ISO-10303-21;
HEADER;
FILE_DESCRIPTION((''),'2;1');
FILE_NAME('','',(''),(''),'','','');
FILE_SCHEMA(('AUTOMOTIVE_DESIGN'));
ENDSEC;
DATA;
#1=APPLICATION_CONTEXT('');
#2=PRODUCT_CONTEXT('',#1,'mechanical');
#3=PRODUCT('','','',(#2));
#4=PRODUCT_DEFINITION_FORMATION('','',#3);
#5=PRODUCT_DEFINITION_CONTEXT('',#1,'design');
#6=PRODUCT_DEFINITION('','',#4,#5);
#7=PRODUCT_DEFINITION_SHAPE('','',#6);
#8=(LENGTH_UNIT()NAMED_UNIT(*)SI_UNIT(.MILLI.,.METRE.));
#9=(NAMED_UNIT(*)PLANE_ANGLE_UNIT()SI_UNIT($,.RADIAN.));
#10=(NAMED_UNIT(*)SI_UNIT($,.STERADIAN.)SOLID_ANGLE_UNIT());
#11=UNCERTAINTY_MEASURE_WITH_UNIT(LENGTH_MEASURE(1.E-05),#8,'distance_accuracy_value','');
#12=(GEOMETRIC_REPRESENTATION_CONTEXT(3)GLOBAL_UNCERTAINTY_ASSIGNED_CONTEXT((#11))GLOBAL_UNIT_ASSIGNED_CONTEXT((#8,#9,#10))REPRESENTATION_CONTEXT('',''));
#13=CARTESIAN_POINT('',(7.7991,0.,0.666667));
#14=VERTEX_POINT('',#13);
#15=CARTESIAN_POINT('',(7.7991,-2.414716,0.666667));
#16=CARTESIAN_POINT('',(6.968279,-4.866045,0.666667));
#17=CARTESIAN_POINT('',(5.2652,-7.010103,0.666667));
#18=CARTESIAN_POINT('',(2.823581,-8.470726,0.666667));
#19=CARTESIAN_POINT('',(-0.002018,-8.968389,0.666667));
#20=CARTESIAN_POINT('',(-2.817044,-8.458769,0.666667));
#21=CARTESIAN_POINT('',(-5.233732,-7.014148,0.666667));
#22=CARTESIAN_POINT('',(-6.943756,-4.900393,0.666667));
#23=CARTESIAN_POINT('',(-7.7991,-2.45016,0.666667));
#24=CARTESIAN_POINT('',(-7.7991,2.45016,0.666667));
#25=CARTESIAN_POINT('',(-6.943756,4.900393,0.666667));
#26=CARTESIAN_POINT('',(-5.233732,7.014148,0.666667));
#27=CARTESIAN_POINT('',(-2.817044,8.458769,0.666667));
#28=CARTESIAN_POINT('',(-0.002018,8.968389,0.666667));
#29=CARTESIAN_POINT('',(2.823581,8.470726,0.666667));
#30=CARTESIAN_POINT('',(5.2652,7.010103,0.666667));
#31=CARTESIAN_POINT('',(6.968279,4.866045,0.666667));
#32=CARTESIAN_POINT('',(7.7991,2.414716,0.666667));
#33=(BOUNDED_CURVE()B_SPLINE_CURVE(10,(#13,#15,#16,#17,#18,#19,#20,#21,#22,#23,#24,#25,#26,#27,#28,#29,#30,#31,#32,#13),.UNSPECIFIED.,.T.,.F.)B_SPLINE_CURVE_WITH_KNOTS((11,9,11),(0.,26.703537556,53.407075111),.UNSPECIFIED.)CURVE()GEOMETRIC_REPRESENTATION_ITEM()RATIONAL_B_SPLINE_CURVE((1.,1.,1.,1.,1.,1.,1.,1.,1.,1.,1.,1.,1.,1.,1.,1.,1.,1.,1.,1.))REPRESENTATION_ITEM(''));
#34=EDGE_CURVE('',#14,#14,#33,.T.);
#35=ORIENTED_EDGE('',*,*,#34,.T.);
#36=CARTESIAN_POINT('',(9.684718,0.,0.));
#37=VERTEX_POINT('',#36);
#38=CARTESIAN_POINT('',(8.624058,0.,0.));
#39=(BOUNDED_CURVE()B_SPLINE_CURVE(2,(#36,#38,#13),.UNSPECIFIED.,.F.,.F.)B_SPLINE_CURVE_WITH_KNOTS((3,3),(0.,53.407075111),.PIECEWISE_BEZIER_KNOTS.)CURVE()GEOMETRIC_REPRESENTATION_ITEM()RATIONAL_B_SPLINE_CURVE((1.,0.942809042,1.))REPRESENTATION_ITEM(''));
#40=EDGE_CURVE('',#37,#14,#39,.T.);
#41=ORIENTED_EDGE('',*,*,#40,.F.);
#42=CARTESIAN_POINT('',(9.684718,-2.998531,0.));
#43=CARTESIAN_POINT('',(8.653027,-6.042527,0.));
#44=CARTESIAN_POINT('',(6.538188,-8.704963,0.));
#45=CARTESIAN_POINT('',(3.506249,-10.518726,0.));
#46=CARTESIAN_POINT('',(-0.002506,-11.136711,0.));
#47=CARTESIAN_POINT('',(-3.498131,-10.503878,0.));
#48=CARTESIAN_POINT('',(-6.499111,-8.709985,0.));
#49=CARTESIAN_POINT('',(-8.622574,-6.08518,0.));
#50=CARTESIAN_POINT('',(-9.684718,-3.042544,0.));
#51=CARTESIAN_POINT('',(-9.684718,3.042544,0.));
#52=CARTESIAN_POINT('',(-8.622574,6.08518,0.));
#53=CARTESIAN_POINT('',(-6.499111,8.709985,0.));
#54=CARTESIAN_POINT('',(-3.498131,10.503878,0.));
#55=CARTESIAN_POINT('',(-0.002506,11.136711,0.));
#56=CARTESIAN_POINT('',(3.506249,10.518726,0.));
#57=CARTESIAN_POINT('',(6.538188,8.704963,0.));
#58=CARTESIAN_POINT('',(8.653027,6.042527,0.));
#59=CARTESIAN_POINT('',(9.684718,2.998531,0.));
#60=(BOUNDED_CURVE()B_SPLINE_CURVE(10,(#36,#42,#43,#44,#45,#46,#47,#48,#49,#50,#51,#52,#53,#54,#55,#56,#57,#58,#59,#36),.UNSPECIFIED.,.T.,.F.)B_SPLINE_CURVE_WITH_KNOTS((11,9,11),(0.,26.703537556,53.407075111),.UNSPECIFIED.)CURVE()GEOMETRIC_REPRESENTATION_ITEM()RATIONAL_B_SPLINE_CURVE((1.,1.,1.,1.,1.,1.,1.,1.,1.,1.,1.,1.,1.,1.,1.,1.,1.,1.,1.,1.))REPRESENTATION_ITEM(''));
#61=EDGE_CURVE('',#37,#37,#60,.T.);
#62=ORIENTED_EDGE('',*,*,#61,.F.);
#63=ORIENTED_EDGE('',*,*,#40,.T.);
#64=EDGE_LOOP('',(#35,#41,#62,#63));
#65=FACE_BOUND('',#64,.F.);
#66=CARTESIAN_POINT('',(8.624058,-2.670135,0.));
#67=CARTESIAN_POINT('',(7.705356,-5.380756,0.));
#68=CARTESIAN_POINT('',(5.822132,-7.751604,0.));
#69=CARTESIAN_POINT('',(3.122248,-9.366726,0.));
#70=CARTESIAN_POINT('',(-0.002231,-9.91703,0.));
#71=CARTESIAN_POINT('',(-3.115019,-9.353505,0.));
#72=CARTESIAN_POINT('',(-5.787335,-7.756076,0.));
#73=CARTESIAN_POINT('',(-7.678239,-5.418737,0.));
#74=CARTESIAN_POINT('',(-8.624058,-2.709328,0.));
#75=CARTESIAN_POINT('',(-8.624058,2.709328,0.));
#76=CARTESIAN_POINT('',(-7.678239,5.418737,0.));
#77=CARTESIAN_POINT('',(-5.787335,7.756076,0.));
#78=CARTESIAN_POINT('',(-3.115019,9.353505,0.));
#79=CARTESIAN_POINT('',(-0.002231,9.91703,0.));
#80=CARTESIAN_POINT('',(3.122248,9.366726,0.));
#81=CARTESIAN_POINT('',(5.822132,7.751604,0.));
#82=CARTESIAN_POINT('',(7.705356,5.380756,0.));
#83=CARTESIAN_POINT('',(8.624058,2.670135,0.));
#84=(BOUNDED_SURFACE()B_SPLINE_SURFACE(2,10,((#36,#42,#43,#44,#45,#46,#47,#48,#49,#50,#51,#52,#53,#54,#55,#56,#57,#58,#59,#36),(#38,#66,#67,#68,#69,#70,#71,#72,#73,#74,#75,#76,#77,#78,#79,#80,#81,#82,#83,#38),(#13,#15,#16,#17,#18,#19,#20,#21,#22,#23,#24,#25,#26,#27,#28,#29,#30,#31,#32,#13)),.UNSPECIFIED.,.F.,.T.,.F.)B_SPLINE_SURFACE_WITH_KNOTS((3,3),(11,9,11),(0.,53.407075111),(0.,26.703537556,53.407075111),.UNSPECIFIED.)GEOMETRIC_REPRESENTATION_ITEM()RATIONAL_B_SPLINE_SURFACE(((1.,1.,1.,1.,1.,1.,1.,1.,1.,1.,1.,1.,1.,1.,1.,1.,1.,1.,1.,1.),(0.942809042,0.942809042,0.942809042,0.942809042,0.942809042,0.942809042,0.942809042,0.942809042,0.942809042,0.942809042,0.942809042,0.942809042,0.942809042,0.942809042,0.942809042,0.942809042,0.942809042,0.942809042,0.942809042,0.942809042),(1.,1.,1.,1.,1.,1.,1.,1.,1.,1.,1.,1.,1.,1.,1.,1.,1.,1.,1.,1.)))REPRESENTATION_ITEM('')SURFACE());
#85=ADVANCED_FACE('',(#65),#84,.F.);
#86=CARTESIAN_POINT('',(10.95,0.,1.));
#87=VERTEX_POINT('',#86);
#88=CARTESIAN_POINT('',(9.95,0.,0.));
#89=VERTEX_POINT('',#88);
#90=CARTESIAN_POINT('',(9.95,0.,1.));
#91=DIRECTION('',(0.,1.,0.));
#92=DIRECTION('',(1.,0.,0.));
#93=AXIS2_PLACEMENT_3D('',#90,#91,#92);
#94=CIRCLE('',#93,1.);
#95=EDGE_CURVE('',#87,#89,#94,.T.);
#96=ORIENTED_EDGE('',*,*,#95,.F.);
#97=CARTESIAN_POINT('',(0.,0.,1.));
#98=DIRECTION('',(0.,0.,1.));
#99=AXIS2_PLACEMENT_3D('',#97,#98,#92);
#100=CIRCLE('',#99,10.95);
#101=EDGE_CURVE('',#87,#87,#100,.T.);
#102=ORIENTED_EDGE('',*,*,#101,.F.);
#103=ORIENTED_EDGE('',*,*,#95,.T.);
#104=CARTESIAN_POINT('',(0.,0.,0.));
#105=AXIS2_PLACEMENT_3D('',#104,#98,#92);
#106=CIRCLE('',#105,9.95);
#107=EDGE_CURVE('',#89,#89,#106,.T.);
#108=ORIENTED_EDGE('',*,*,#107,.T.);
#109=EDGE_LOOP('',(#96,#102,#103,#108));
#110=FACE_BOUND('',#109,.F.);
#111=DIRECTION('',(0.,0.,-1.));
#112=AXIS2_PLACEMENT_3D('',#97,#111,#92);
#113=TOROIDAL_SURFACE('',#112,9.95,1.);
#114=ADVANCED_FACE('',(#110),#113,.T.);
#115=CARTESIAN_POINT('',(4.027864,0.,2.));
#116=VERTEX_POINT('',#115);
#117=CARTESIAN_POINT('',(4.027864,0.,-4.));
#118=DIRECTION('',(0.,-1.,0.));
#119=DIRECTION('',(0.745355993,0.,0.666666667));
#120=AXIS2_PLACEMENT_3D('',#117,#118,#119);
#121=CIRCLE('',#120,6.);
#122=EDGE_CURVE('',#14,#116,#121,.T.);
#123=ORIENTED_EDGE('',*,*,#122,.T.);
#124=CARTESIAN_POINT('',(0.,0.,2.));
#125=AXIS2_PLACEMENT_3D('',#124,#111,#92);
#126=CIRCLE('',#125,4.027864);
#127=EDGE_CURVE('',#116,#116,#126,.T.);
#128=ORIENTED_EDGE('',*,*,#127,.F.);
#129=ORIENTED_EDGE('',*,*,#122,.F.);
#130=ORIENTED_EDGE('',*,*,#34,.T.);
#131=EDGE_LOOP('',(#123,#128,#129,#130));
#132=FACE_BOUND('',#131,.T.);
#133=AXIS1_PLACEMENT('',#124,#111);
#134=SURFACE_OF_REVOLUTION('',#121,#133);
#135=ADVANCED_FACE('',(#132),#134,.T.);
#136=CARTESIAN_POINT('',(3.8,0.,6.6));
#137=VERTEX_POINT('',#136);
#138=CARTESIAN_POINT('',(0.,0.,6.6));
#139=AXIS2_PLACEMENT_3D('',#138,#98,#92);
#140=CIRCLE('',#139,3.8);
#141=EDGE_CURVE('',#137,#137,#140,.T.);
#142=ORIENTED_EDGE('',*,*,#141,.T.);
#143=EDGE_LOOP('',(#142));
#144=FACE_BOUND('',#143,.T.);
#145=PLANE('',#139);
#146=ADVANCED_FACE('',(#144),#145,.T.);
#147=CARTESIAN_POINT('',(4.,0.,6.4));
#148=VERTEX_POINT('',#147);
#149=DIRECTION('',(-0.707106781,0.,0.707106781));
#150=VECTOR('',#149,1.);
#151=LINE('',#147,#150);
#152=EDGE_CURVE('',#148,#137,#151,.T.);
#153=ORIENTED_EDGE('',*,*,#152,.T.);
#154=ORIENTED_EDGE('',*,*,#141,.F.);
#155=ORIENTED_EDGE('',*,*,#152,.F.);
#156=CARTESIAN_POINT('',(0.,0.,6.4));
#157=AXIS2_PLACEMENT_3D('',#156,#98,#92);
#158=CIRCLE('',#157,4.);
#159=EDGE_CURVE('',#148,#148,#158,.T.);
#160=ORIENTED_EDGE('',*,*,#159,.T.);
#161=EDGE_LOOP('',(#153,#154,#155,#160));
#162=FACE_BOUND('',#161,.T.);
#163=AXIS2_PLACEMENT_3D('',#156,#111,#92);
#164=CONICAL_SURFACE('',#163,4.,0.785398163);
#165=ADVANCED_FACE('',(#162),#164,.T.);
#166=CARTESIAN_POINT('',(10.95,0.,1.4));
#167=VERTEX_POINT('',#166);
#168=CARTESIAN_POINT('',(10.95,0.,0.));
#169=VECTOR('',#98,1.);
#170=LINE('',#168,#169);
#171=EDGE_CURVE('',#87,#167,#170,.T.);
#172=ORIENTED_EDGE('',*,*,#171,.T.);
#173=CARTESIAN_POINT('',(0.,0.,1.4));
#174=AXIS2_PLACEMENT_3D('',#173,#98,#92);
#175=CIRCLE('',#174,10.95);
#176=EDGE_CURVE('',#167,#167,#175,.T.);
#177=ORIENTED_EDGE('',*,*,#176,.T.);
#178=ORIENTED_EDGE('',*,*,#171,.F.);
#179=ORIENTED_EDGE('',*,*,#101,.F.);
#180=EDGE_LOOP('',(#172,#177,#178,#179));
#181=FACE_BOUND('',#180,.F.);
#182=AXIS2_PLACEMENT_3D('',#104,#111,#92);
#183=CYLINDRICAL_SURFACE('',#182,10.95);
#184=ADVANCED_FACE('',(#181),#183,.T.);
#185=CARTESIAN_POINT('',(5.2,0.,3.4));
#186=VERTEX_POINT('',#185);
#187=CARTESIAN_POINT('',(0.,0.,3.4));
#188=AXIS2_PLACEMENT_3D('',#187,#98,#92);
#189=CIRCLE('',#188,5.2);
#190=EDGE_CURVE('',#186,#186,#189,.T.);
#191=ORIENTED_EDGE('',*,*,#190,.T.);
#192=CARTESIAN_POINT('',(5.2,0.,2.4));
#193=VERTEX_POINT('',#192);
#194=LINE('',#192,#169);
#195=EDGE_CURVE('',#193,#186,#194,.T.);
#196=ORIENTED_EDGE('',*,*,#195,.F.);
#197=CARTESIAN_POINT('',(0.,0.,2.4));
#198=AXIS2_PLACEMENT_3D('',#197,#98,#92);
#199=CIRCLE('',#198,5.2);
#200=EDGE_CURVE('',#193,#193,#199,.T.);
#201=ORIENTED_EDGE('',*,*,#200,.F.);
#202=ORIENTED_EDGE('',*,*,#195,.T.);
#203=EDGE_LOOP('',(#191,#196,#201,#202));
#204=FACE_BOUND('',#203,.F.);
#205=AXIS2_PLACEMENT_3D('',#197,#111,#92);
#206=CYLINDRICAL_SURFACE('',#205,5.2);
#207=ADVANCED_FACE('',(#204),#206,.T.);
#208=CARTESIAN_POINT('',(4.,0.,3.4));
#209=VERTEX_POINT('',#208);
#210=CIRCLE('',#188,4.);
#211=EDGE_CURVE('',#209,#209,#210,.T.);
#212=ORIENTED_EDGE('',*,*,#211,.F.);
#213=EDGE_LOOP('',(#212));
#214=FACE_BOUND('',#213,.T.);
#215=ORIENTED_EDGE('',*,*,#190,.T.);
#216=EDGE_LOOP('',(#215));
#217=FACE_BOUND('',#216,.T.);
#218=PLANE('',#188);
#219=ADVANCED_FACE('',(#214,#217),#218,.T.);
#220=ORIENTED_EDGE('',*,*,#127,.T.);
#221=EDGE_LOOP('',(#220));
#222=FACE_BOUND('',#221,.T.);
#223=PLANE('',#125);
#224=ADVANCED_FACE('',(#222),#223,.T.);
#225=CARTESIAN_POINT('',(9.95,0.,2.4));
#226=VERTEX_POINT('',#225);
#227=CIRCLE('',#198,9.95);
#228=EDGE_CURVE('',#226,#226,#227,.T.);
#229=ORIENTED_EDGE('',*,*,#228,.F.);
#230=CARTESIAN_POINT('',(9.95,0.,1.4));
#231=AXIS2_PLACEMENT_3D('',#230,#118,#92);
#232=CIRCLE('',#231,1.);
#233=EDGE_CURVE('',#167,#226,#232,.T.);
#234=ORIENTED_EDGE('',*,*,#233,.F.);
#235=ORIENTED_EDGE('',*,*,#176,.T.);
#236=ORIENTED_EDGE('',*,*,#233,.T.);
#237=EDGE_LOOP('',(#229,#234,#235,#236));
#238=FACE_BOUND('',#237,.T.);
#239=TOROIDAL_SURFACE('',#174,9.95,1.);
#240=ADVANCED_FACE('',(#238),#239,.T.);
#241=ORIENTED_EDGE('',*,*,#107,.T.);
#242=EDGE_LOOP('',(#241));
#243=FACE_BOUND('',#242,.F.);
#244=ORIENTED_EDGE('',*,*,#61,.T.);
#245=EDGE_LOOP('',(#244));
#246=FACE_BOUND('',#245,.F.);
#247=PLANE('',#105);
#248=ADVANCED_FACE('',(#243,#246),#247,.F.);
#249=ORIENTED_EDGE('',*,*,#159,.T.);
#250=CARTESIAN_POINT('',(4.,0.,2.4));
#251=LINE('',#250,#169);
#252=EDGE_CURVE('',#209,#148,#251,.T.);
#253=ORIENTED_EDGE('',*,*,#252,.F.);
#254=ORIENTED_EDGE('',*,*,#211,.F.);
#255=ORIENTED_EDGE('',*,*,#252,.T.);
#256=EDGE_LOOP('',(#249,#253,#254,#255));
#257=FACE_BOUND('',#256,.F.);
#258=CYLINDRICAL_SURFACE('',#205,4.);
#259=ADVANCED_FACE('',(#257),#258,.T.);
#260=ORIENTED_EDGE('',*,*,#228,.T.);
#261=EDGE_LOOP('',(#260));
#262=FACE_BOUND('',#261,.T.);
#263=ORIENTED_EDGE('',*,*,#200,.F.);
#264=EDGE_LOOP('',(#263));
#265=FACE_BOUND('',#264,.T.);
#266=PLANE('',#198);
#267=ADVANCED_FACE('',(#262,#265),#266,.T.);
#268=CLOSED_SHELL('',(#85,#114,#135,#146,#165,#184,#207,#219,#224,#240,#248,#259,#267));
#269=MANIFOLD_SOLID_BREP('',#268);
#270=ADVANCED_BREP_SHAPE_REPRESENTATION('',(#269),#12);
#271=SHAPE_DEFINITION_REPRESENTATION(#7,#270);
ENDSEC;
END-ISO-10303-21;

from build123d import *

# Parameters (mm, degrees)
F0_R     = 10.95
F1_DEPTH = 2.4
F2_R     = 4
F3_DEPTH = 4.2
F4_R     = 1
F5_R     = 5.2
F5_R_2   = 4
F6_DEPTH = 1
F7_R     = 1
F8_R     = 8.5
F9_DEPTH = 2
F11_SIZE = 0.2
F12_R    = 3


# Not quite as in the source:
# - a fillet or chamfer that OpenCascade refuses, or shapes differently, is made with other operations: its cross-section is extruded or revolved along the edge and cut away or added


with BuildPart() as f1:
    # F0 (on Top) → F1 (new body)
    with BuildSketch(Plane.XY):
        Circle(F0_R)
    extrude(amount=F1_DEPTH)

    # F2 (on face) → F3 (join)
    with BuildSketch(Plane.XY.offset(2.4)):
        Circle(F2_R)
    extrude(amount=F3_DEPTH)

    # F4
    f4_edges = [f1.edges().sort_by_distance(p)[0] for p in [
        (-10.95, 0, 2.4),
    ]]
    fillet(f4_edges, radius=F4_R)

    # F5 (on face) → F6 (join)
    with BuildSketch(Plane.XY.offset(2.4)):
        Circle(F5_R)
        Circle(F5_R_2, mode=Mode.SUBTRACT)
    extrude(amount=F6_DEPTH)

    # F7
    f7_edges = [f1.edges().sort_by_distance(p)[0] for p in [
        (-10.95, 0, 0),
    ]]
    fillet(f7_edges, radius=F7_R)

    # F8 (on face) → F9 (cut)
    with BuildSketch(Plane(origin=(0, 0, 0), x_dir=(1, 0, 0), z_dir=(0, 0, -1))):
        Circle(F8_R)
    extrude(amount=-F9_DEPTH, mode=Mode.SUBTRACT)

    # F10: fillet of radius 6 on 1 edges, made by hand

    # F10_s1 → F10_t2 (revolve)
    with BuildSketch(Plane.XZ):
        with BuildLine():
            ThreePointArc((8.5, 0), (6.4773537878, 1.4772255751), (4.027864045, 2))
            Line((4.027864045, 2), (8.5, 2))
            Line((8.5, 2), (8.5, 0))
        make_face()
    revolve(axis=Axis((0, 0, 2), (0, 0, -1)))

    # F11
    f11_edges = [f1.edges().sort_by_distance(p)[0] for p in [
        (-4, 0, 6.6),
    ]]
    chamfer(f11_edges, length=F11_SIZE)

    # F12
    f12_edges = [f1.edges().sort_by_distance(p)[0] for p in [
        (-8.5, 0, 0),
    ]]
    fillet(f12_edges, radius=F12_R)


solid = f1.part
